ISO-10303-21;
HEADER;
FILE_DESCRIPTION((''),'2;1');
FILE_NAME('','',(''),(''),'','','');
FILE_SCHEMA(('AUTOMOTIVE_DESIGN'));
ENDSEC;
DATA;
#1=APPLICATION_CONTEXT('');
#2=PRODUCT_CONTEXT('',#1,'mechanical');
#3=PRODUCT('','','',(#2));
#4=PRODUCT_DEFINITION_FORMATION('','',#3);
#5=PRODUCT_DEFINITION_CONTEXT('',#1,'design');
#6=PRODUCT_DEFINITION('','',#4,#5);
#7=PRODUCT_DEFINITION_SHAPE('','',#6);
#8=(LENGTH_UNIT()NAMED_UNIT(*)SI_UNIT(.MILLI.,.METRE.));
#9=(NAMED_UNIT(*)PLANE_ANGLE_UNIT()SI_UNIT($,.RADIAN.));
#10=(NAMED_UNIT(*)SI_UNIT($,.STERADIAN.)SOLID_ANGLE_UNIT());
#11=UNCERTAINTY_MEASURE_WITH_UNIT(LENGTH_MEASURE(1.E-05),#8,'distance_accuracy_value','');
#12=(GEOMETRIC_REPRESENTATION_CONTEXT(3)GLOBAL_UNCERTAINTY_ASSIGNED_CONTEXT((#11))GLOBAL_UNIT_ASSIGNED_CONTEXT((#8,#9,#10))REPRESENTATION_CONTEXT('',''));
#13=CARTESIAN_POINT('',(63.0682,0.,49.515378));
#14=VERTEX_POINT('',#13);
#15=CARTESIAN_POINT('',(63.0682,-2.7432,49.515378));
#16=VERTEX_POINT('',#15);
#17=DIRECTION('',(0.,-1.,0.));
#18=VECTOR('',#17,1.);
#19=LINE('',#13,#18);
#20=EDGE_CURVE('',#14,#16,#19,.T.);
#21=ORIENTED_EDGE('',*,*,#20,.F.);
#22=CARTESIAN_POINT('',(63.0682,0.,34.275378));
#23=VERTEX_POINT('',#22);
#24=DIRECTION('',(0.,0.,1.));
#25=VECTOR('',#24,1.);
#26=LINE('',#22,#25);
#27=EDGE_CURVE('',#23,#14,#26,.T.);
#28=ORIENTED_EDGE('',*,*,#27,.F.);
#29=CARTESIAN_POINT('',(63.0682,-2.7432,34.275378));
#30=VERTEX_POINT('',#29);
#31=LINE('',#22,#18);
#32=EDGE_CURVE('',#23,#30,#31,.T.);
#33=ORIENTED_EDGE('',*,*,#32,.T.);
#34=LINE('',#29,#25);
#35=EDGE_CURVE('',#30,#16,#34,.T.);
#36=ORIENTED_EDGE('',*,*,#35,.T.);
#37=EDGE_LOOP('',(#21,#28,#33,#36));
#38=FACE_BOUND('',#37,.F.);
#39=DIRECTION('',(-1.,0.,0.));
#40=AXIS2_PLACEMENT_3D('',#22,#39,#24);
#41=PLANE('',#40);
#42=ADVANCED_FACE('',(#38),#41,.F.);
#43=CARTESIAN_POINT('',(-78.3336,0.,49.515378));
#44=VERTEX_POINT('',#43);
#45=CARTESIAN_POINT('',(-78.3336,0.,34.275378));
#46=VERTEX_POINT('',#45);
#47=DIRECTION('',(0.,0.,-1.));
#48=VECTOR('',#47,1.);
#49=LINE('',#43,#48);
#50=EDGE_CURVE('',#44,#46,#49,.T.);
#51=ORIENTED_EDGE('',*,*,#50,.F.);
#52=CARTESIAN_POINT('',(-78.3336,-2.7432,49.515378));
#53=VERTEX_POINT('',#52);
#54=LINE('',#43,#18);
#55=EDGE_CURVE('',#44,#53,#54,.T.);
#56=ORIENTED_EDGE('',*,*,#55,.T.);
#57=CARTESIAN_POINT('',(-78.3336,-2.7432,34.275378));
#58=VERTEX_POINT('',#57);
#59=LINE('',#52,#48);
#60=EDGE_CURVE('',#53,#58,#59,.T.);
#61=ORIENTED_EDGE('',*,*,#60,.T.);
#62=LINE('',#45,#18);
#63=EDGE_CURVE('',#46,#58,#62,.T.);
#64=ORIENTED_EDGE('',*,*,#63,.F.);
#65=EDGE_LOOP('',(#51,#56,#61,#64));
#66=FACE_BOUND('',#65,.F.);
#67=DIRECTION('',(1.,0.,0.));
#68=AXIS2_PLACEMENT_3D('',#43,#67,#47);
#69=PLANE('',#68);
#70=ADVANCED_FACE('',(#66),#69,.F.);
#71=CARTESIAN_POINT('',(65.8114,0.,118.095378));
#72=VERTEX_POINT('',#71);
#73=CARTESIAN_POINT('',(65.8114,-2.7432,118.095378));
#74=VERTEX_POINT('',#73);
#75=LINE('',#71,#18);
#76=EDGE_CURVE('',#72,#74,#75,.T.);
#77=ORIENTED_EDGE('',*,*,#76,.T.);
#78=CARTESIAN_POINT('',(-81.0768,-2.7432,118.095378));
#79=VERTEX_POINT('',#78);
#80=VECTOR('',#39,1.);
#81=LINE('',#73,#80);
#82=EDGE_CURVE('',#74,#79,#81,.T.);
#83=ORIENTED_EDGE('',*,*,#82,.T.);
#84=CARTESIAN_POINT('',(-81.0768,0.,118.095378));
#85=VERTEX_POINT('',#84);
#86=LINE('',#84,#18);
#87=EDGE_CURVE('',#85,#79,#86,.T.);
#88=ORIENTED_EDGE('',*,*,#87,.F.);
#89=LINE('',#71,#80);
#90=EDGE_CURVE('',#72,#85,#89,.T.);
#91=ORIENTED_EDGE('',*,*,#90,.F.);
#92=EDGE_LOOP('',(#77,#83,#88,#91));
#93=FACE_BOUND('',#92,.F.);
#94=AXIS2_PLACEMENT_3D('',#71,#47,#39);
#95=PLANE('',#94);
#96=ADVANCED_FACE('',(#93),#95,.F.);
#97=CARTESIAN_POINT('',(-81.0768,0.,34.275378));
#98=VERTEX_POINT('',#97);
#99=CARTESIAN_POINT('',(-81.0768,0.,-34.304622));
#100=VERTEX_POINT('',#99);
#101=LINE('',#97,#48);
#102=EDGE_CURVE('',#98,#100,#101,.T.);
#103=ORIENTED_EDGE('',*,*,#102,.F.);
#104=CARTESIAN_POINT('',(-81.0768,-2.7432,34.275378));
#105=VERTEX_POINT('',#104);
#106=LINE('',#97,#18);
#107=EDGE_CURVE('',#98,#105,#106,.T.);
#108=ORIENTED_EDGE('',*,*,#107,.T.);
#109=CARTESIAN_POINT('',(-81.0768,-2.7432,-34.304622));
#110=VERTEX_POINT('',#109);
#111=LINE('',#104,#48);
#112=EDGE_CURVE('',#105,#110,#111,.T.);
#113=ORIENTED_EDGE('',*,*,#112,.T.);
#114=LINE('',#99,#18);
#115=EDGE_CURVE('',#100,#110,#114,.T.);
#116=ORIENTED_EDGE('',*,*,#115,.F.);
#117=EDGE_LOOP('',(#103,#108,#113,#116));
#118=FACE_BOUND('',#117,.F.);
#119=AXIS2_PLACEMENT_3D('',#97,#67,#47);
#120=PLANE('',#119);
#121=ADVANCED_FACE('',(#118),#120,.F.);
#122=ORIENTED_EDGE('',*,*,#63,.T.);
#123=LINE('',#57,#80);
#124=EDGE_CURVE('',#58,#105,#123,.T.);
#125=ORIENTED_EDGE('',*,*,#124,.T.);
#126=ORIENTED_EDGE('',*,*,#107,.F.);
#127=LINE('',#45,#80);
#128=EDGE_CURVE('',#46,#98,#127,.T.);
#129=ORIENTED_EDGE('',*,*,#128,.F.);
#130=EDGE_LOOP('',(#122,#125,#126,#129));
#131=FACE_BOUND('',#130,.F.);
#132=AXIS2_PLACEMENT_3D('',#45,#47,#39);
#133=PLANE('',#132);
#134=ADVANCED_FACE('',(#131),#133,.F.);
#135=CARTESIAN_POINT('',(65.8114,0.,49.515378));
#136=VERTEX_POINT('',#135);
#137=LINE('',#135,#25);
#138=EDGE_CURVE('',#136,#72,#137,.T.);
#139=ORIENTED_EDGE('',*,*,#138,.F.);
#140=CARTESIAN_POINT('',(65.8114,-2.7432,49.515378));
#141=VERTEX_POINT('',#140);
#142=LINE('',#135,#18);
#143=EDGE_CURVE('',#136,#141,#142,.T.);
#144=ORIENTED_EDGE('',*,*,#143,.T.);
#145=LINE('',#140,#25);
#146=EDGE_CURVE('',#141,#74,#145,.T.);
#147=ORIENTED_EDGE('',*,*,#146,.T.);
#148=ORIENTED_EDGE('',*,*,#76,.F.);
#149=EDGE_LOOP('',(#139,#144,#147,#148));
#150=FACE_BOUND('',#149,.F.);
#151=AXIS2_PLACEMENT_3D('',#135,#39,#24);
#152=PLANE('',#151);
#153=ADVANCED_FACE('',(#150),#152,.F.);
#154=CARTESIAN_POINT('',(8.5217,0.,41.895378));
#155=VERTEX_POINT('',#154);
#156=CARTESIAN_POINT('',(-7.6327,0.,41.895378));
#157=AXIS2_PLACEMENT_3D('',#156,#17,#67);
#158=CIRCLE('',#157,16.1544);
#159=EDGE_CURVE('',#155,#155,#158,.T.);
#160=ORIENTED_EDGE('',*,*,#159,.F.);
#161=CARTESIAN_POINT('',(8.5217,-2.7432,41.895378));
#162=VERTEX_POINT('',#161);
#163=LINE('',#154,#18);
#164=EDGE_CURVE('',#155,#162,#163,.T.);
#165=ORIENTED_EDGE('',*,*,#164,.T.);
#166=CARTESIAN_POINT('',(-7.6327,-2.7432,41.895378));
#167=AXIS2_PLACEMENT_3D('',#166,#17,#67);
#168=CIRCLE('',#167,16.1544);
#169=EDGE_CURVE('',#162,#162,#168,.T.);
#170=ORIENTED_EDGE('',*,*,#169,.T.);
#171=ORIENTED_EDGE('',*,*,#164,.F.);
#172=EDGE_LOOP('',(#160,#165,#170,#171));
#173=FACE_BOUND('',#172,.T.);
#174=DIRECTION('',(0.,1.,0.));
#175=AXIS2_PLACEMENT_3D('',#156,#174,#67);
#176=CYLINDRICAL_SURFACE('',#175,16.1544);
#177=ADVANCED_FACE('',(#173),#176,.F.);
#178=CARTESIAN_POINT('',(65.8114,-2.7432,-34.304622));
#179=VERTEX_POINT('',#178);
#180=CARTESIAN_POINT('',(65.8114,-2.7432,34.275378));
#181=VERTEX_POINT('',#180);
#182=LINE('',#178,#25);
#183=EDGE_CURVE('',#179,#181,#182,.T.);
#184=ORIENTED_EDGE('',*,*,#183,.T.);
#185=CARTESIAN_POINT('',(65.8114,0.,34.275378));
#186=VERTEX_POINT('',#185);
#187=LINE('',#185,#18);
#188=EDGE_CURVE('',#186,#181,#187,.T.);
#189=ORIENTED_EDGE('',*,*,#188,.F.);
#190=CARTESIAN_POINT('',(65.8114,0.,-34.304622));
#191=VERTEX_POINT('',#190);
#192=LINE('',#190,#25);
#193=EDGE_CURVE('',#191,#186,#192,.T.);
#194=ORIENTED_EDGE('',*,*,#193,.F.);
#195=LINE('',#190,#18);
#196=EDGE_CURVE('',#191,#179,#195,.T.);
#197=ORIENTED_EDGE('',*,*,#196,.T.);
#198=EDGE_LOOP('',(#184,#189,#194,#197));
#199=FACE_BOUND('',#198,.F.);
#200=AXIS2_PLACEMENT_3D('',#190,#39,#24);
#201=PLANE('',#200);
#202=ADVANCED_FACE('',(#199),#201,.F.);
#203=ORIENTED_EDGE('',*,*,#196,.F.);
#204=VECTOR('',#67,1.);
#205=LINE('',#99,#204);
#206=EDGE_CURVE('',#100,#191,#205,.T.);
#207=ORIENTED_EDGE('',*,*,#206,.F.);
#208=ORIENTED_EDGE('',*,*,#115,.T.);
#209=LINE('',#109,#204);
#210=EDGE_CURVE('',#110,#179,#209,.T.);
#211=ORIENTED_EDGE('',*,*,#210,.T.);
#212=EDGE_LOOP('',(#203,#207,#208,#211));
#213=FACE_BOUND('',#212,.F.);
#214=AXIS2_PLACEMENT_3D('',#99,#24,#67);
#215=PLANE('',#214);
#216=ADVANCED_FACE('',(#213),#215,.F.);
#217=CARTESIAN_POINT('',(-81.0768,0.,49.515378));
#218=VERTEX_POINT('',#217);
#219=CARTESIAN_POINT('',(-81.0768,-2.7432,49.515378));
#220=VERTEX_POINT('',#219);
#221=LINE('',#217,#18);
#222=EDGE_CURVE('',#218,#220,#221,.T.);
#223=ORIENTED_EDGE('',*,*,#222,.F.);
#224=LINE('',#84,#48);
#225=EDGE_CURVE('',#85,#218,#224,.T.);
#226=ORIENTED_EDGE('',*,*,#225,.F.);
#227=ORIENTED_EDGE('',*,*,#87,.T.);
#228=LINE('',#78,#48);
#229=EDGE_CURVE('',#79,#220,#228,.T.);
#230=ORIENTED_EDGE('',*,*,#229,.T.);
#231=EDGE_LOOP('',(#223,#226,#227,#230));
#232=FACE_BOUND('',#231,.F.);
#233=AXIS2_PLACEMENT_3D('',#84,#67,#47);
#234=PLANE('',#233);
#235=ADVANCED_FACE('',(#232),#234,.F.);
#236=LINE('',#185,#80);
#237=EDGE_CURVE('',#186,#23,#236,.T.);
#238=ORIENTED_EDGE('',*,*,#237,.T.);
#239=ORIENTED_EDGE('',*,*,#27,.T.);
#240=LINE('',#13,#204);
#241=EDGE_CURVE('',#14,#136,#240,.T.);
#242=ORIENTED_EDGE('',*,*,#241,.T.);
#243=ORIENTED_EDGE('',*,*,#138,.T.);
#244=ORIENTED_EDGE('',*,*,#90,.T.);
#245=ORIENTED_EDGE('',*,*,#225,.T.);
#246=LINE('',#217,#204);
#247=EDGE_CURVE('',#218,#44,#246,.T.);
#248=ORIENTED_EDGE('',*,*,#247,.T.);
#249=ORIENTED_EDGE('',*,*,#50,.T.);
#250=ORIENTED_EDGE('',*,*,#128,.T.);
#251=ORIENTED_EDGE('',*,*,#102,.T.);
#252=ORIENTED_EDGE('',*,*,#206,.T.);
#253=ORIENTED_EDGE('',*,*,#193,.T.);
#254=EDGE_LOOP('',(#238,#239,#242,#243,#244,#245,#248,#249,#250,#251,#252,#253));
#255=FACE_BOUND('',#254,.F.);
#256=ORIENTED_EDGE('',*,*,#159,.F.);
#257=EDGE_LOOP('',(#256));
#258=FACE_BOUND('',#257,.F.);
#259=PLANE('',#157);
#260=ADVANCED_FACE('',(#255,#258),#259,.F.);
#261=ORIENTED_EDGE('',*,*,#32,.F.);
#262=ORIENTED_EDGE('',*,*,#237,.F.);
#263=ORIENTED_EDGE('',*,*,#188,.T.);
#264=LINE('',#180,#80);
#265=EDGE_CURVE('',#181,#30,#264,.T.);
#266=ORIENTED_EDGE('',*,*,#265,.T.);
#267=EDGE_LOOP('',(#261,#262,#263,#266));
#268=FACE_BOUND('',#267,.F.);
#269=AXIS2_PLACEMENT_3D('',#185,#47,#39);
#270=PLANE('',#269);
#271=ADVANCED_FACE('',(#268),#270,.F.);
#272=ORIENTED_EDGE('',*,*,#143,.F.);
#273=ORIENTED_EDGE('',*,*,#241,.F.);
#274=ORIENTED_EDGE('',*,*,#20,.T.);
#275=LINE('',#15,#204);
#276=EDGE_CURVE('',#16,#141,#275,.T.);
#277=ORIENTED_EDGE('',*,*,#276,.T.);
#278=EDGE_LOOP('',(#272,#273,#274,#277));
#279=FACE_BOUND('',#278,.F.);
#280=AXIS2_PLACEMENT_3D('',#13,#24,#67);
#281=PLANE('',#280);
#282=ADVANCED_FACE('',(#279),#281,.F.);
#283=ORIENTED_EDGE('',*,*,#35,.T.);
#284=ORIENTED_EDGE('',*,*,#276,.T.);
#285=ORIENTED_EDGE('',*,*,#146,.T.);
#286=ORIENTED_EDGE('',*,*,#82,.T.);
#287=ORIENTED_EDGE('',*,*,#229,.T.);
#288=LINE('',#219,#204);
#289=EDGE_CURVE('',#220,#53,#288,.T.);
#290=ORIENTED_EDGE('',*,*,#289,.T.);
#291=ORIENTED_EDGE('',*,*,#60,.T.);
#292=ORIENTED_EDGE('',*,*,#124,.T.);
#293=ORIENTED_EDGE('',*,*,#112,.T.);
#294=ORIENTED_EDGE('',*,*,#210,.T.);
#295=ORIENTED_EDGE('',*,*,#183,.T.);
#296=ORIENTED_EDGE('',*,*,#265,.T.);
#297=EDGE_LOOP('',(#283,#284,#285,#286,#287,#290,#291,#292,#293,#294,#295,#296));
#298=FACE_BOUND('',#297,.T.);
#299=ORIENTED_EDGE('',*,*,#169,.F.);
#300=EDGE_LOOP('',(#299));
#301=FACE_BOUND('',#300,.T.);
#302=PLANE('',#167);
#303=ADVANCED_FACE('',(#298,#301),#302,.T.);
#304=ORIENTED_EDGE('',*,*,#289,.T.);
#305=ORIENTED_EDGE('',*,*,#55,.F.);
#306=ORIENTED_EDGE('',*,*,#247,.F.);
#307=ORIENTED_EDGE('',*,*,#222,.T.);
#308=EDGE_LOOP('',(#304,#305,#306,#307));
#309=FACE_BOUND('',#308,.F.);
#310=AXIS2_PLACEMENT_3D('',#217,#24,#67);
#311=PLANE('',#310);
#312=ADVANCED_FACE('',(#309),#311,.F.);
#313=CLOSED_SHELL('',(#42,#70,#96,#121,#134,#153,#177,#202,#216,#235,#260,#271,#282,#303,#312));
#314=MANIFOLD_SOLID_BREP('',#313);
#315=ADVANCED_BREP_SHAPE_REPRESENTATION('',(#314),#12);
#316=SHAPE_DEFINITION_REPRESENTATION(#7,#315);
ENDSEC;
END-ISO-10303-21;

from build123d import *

# Parameters (mm, degrees)
F0_R     = 16.1544
F1_DEPTH = 2.7432


# Not quite as in the source:
# - a feature names something its author has since deleted; it is built from what else it names


with BuildPart() as f1:
    # F0 (on Front) → F1 (new body)
    with BuildSketch(Plane.XZ):
        Polygon((-15.24, 118.095377792), (-81.0768, 118.095377792), (-81.0768, 49.515377792), (-78.3336, 49.515377792), (-78.3336, 34.275377792), (-81.0768, 34.275377792), (-81.0768, -34.304622208), (-15.24, -34.304622208), (0, -34.304622208), (65.8114, -34.304622208), (65.8114, 34.275377792), (63.0682, 34.275377792), (63.0682, 49.515377792), (65.8114, 49.515377792), (65.8114, 118.095377792), (0, 118.095377792), align=None)
        with Locations((-7.6327, 41.895377792)):
            Circle(F0_R, mode=Mode.SUBTRACT)
    extrude(amount=F1_DEPTH)


solid = f1.part
